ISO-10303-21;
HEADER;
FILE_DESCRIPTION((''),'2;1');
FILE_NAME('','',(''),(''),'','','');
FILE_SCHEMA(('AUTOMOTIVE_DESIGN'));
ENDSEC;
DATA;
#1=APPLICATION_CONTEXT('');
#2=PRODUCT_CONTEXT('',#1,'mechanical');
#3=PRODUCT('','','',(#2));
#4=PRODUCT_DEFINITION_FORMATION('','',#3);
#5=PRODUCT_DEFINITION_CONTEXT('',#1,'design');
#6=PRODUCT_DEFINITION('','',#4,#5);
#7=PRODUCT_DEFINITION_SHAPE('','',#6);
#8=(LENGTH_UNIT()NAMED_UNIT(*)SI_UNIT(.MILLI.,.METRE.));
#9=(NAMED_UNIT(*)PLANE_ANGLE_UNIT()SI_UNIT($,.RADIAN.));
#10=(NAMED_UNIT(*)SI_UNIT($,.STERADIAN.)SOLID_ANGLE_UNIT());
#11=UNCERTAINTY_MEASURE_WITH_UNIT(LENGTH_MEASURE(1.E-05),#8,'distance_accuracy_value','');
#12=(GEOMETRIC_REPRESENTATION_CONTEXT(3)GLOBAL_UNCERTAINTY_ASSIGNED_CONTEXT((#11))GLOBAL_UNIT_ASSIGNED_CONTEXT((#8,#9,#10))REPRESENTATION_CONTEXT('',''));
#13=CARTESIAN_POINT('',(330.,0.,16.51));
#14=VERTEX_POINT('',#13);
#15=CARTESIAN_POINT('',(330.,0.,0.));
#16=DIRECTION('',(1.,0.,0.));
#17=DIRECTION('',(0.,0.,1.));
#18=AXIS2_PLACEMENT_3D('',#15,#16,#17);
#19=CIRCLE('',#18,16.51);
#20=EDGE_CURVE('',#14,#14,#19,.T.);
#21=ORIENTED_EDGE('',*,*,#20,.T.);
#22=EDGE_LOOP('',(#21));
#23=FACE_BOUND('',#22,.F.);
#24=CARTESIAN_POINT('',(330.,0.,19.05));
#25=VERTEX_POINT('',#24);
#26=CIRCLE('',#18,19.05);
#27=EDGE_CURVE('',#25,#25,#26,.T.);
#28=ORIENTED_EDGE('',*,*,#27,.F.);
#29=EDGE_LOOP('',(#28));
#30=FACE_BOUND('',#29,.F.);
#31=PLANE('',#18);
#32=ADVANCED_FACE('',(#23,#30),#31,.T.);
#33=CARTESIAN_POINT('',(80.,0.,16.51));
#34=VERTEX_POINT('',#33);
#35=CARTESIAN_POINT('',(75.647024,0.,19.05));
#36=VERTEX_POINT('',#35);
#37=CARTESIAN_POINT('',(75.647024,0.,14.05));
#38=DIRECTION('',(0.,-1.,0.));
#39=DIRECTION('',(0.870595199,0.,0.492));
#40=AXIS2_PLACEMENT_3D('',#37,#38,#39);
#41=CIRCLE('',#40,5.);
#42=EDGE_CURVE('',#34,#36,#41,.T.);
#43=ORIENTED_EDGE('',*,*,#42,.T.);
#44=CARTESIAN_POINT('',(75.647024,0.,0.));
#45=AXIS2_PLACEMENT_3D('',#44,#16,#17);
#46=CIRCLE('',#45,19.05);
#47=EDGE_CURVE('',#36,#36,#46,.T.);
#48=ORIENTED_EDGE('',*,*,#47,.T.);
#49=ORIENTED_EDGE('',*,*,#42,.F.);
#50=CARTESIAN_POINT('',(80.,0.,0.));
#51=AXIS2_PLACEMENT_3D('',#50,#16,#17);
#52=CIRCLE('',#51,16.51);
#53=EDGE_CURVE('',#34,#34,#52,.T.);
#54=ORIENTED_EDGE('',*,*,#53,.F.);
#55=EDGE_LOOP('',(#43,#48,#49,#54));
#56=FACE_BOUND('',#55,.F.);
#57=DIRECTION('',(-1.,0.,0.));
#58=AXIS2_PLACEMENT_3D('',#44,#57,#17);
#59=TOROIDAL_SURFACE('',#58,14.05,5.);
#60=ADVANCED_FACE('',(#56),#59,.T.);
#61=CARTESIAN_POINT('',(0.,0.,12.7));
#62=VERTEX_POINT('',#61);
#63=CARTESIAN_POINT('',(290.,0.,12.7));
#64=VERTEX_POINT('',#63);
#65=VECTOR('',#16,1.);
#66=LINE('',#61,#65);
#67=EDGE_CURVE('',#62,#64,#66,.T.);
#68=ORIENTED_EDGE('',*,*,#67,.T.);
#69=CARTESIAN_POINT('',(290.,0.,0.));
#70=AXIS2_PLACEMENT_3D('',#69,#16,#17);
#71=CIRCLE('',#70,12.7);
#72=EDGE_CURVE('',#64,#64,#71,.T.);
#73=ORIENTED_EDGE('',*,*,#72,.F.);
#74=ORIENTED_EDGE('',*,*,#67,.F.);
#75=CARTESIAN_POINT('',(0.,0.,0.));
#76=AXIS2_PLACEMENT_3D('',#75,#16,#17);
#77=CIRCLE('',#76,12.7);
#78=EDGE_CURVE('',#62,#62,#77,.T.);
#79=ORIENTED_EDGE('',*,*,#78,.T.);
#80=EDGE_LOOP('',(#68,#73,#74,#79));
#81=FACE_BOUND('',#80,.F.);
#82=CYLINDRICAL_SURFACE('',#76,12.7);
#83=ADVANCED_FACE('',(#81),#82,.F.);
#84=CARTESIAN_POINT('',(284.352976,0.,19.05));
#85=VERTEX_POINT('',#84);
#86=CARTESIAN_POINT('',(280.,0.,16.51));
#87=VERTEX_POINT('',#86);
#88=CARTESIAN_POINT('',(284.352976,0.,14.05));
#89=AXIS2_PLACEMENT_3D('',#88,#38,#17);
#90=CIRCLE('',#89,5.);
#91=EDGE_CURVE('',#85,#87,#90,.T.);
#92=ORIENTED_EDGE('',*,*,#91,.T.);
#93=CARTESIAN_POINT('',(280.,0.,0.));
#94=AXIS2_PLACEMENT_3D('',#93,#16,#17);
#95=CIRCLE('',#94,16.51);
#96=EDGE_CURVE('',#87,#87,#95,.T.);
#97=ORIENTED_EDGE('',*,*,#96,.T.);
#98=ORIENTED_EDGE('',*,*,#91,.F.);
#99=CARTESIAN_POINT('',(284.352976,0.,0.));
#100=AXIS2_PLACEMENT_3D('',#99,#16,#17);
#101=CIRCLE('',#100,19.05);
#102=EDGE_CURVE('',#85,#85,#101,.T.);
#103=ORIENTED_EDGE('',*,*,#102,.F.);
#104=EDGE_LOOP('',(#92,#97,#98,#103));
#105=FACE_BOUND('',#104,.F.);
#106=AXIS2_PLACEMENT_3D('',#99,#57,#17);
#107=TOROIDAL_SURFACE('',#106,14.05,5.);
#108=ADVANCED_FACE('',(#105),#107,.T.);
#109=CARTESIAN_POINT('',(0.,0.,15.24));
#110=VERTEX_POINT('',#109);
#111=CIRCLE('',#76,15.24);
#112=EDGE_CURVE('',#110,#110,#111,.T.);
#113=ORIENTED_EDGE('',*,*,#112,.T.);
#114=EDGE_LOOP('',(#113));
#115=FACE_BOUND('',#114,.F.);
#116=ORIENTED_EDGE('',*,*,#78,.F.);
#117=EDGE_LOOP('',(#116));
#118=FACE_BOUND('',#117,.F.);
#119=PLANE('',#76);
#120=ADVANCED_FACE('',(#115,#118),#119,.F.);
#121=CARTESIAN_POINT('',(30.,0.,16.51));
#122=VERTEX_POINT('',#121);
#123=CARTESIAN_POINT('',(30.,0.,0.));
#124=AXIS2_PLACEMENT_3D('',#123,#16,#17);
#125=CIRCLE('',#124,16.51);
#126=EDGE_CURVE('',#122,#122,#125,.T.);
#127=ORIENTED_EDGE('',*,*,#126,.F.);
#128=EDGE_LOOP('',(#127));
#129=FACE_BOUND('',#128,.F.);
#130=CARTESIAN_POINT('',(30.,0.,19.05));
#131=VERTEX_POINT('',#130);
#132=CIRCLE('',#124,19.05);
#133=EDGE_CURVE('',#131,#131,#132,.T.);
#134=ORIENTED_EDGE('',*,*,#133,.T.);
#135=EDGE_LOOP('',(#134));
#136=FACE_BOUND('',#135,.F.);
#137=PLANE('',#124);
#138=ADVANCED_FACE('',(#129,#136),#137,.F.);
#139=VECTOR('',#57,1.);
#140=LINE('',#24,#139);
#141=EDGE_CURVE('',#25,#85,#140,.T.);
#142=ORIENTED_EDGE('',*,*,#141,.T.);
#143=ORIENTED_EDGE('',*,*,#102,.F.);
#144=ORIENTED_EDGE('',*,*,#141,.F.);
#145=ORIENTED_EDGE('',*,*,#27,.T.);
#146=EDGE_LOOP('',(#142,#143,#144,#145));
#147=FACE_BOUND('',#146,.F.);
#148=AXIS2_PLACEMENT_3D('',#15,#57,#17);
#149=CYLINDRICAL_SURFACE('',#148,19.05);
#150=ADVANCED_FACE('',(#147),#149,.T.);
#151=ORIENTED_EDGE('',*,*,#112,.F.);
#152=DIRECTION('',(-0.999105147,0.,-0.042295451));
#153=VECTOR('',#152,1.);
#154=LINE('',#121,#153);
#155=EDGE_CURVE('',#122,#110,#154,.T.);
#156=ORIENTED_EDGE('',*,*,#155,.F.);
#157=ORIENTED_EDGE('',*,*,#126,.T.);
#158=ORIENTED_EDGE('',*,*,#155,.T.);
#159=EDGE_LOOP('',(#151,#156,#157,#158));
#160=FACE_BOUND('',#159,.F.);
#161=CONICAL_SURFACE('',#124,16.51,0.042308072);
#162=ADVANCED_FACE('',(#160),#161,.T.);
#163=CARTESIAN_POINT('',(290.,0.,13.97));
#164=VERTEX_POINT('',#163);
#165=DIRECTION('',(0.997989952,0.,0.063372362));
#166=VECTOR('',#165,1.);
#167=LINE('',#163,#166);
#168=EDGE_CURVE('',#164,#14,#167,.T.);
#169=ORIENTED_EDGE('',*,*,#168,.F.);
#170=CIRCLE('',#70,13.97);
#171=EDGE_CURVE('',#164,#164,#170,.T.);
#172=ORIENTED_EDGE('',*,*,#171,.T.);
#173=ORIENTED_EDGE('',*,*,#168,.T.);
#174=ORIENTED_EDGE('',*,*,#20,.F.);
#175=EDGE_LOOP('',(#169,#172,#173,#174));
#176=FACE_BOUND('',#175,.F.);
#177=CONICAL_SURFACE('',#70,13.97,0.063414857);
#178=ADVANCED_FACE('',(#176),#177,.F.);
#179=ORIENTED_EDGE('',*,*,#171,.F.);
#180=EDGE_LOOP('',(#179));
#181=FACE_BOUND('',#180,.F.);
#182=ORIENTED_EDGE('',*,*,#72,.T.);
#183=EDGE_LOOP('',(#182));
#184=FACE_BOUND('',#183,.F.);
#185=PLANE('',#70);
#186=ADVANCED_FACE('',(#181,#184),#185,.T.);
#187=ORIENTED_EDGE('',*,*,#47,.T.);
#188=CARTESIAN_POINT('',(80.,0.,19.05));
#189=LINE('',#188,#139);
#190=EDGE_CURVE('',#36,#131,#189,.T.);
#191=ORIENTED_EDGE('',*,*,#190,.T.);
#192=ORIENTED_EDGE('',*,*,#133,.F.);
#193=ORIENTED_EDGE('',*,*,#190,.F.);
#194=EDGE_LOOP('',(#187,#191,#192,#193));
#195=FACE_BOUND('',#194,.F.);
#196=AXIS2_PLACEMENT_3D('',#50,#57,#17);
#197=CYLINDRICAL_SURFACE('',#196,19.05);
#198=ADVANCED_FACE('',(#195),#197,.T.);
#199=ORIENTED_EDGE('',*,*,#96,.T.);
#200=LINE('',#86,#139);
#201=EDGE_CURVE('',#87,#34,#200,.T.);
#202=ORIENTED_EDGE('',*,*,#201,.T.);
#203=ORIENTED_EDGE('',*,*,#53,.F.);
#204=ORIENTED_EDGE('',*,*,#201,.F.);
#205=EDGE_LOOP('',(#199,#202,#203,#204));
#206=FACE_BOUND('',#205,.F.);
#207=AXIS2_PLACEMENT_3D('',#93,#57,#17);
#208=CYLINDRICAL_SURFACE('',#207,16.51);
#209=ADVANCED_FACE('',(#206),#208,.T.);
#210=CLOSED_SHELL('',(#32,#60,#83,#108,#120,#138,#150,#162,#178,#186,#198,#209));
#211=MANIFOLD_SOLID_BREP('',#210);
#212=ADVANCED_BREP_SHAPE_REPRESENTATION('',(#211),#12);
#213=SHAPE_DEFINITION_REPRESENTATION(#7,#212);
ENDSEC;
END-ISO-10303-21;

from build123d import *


# Not quite as in the source:
# - a fillet or chamfer that OpenCascade refuses, or shapes differently, is made with other operations: its cross-section is extruded or revolved along the edge and cut away or added


with BuildPart() as f2:
    # F0 (on Front) → F2 (revolve)
    with BuildSketch(Plane.XZ):
        Polygon((0, 15.24), (0, 12.7), (30, 12.7), (290, 12.7), (290, 13.97), (330, 16.51), (330, 19.05), (280, 19.05), (280, 16.51), (80, 16.51), (80, 19.05), (30, 19.05), (30, 16.51), align=None)
    revolve(axis=Axis((0, 0, 0), (1, 0, 0)))

    # F3: fillet of radius 5 on 2 edges, made by hand

    # F3_s1 → F3_t2 (revolve, cut)
    with BuildSketch(Plane.XZ):
        with BuildLine():
            ThreePointArc((80, 16.51), (78.1669446402, 18.3685645763), (75.6470240065, 19.05))
            Line((75.6470240065, 19.05), (75.6470240065, 19.15))
            Line((75.6470240065, 19.15), (80, 19.15))
            Line((80, 19.15), (80.1, 19.05))
            ThreePointArc((80.1, 19.05), (80.1, 17.78), (80.0870595199, 16.5592))
            Line((80.0870595199, 16.5592), (80, 16.51))
        make_face()
    revolve(axis=Axis((80, 0, 0), (1, 0, 0)), mode=Mode.SUBTRACT)

    # F3_s3 → F3_t4 (revolve, cut)
    with BuildSketch(Plane.XZ):
        with BuildLine():
            ThreePointArc((284.3529759935, 19.05), (281.8330553598, 18.3685645763), (280, 16.51))
            Line((280, 16.51), (279.9129404801, 16.5592))
            ThreePointArc((279.9129404801, 16.5592), (279.9, 17.78), (279.9, 19.05))
            Line((279.9, 19.05), (280, 19.15))
            Line((280, 19.15), (284.3529759935, 19.15))
            Line((284.3529759935, 19.15), (284.3529759935, 19.05))
        make_face()
    revolve(axis=Axis((280, 0, 0), (1, 0, 0)), mode=Mode.SUBTRACT)


solid = f2.part
